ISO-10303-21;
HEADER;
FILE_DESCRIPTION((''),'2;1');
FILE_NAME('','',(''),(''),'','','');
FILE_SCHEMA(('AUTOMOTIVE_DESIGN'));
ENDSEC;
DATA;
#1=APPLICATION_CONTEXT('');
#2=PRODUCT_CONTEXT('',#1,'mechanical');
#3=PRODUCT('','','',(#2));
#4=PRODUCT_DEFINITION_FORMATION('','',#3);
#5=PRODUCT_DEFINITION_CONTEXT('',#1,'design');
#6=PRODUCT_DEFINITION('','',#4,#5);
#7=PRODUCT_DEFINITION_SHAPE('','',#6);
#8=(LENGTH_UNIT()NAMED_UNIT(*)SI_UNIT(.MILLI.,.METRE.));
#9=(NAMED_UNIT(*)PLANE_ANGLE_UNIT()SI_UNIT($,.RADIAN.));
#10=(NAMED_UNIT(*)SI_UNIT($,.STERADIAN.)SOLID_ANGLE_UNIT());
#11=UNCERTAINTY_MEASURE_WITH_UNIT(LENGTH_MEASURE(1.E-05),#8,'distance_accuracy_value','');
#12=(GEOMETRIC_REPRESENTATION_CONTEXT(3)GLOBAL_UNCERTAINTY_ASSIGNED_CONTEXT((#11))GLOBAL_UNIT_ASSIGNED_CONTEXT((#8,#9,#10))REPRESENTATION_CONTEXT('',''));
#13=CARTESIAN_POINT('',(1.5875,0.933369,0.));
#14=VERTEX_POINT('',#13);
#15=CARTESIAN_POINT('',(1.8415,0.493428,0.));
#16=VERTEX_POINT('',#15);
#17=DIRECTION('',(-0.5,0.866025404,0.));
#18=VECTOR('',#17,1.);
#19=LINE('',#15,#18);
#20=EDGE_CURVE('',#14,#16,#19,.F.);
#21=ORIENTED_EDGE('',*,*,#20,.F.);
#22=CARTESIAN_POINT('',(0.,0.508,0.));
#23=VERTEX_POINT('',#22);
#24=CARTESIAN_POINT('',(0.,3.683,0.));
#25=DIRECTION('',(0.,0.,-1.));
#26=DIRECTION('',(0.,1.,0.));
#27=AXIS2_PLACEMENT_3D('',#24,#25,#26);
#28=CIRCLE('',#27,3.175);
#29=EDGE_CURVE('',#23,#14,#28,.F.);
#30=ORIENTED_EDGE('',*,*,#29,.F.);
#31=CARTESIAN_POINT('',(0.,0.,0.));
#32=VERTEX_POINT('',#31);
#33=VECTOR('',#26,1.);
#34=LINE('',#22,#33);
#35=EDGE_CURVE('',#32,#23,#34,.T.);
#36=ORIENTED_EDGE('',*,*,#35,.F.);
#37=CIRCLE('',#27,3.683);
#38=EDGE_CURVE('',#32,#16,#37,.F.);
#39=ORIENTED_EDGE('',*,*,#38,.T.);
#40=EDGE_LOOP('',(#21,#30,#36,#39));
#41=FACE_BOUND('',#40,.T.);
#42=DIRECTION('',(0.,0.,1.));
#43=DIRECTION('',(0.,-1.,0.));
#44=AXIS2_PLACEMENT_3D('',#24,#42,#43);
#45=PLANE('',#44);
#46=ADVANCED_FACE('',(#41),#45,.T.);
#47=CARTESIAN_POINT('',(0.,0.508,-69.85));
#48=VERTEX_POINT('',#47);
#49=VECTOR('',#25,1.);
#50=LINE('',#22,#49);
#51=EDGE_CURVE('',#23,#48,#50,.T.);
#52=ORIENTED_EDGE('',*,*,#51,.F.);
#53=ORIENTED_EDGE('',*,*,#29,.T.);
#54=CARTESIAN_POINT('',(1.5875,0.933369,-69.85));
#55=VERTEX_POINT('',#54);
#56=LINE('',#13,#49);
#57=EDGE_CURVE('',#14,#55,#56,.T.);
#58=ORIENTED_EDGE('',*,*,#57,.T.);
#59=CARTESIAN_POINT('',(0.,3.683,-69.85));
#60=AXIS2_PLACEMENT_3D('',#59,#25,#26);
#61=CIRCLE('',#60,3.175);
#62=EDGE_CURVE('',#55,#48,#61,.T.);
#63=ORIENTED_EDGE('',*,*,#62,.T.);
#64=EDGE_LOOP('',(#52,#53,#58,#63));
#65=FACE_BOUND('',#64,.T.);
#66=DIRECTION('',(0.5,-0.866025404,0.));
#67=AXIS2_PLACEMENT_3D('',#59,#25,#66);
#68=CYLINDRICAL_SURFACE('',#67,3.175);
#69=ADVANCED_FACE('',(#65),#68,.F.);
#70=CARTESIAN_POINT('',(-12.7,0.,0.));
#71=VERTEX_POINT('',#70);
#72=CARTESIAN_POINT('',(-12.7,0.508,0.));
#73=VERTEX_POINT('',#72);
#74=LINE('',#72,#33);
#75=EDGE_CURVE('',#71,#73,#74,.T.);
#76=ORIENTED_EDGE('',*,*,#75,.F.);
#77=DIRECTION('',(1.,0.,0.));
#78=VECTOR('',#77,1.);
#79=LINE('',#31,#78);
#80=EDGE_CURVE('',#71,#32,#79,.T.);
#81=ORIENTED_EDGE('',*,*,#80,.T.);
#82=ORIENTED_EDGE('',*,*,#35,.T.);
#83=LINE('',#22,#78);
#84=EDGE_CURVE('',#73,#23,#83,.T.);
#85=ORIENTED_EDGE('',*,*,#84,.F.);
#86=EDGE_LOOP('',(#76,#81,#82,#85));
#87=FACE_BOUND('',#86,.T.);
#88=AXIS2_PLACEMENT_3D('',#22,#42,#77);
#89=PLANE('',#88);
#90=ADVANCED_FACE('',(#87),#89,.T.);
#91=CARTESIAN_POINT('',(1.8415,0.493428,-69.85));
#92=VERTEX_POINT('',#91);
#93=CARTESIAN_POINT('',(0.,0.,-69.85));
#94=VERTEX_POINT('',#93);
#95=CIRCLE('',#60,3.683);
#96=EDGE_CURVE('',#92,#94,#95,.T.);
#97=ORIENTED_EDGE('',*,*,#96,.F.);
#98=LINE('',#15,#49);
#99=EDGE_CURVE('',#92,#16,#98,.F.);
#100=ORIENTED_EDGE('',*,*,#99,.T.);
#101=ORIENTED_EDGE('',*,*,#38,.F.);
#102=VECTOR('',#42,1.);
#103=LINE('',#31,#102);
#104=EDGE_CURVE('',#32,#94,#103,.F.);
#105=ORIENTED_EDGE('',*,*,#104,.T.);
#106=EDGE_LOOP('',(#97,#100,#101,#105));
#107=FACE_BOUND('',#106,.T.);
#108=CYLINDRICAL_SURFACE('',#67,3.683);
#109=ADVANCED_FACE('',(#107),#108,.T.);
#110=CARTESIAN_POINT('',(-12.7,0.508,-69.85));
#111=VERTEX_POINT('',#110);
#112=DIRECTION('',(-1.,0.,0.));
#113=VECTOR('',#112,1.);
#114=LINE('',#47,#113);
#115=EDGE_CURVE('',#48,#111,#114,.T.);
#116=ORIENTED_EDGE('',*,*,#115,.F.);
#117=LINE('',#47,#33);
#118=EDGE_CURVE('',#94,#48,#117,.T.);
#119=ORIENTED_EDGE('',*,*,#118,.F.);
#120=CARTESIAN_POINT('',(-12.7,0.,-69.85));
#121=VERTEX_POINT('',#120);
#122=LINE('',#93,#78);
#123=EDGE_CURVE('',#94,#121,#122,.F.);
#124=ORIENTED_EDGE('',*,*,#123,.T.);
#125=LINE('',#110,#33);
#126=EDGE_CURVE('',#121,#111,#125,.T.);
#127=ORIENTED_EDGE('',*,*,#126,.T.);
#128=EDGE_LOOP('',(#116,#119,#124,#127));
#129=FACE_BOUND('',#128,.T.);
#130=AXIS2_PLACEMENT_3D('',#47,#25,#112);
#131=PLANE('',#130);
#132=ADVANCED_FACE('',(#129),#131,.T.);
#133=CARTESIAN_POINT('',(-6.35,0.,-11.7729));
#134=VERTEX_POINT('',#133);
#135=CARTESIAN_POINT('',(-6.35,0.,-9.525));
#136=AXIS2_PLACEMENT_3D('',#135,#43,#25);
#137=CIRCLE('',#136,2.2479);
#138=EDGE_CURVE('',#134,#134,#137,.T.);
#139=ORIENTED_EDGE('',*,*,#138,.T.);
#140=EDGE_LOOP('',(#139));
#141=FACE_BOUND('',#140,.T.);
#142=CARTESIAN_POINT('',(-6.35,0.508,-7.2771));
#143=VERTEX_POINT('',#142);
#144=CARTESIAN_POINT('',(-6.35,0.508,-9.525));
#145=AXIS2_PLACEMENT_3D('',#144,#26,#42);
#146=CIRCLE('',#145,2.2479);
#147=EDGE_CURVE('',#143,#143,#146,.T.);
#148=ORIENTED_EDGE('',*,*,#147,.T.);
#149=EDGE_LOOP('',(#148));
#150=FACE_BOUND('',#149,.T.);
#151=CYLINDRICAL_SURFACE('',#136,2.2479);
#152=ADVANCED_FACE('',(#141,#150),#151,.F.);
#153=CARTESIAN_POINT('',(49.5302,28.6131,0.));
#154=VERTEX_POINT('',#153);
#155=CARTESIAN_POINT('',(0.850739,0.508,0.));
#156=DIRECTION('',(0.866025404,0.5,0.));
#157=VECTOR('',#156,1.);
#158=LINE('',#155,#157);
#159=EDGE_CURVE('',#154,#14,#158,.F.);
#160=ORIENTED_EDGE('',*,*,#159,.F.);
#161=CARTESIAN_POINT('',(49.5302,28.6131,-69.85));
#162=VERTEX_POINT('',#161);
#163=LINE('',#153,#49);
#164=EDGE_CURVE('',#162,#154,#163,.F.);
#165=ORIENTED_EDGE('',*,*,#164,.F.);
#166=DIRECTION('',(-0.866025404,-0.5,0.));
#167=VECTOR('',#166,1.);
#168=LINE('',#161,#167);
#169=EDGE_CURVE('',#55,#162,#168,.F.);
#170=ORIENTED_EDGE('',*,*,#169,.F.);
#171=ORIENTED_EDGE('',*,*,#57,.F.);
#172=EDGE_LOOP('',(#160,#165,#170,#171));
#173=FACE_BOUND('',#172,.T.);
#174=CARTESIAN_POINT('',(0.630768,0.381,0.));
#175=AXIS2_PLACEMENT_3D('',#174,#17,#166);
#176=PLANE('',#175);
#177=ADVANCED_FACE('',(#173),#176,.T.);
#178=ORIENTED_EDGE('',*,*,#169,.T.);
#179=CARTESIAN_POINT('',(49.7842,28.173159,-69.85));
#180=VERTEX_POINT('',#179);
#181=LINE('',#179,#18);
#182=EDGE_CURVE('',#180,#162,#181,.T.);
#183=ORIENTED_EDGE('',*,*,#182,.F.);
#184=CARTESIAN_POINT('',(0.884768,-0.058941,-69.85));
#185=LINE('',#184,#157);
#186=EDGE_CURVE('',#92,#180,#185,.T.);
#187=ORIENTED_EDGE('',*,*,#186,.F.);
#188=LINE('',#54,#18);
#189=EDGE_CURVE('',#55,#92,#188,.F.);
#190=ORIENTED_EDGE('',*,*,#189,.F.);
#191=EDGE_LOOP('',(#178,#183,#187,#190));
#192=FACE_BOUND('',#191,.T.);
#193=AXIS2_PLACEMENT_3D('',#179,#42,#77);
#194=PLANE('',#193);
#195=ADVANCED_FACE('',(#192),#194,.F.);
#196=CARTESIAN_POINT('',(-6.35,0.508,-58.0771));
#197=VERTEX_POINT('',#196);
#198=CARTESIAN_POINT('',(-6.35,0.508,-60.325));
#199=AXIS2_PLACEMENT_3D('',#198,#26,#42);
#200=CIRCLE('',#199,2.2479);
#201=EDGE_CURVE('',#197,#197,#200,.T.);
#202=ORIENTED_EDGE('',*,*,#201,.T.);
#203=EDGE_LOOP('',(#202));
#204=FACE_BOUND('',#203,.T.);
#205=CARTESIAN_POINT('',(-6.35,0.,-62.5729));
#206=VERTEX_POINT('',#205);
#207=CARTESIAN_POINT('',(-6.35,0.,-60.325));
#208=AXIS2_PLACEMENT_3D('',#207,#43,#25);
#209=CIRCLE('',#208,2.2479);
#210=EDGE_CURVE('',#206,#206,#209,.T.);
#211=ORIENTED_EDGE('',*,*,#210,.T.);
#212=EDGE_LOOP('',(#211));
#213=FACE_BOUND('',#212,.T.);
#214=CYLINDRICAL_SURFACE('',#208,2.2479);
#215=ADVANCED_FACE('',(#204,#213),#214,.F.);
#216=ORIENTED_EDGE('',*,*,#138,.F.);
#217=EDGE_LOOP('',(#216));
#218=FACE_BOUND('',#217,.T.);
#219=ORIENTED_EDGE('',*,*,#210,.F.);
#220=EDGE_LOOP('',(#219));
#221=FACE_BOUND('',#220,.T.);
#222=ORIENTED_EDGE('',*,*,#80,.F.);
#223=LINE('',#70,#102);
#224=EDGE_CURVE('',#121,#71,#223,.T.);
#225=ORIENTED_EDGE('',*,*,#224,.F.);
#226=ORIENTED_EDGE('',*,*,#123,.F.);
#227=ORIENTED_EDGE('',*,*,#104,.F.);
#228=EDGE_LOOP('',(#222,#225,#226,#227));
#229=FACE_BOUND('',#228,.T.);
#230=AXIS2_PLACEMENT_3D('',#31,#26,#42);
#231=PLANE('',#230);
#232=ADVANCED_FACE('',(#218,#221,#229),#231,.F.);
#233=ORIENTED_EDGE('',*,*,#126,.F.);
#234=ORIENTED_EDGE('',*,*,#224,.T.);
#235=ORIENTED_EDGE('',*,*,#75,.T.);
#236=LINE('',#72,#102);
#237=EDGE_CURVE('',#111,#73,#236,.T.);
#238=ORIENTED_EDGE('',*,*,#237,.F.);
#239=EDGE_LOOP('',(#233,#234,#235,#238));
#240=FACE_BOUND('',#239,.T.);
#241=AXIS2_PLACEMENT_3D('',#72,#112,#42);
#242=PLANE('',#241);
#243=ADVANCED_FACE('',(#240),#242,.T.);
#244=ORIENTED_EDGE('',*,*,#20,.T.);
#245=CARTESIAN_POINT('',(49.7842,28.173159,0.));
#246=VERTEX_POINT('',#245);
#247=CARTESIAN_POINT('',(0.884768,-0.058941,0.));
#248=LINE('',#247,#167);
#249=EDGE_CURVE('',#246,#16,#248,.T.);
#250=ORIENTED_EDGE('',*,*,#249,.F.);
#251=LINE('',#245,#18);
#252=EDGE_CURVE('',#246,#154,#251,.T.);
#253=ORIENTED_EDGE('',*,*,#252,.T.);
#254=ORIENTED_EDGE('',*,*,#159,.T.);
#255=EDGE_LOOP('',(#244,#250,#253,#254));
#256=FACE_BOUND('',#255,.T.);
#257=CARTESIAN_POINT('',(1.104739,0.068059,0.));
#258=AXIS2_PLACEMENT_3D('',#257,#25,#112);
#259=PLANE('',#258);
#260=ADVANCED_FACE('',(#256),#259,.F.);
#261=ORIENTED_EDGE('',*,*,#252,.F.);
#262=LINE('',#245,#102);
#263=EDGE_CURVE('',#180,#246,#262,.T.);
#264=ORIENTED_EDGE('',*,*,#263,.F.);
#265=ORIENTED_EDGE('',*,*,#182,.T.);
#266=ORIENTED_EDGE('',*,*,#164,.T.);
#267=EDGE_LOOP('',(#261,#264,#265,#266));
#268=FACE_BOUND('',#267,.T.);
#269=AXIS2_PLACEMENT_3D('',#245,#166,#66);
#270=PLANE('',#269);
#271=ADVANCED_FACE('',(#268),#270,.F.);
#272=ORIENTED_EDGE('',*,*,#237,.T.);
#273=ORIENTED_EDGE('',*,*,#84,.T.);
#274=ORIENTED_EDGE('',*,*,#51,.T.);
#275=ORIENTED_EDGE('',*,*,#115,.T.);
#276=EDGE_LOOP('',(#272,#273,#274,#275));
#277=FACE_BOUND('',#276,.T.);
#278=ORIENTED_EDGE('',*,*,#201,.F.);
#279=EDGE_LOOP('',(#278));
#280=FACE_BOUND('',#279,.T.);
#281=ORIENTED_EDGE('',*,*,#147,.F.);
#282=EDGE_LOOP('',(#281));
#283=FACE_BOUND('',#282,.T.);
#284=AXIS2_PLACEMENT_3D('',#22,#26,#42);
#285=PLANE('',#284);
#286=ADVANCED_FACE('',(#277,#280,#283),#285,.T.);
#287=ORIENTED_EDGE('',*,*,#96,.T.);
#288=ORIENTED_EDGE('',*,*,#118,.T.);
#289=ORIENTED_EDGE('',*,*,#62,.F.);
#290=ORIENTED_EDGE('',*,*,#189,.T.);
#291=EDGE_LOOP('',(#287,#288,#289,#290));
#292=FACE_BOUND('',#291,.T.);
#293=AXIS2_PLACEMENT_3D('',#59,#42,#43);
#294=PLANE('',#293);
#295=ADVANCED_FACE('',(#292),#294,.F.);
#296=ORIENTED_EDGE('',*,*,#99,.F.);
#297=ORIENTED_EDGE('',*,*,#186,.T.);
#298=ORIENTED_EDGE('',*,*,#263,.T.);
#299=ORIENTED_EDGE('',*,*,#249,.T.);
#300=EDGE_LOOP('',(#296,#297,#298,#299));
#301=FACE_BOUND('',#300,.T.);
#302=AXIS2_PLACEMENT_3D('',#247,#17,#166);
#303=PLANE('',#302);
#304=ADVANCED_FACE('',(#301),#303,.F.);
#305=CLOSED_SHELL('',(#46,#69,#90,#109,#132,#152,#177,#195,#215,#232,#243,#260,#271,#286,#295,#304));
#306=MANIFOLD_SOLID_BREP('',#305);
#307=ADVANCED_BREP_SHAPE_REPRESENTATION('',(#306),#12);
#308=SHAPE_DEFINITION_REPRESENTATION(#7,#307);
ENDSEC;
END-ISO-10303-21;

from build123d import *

# Parameters (mm, degrees)
SKETCH2_W             = 12.7
SKETCH2_H             = 69.85
BOSS_EXTRUDE2_DEPTH   = 0.508
EDGE_FLANGE2_DEPTH    = 69.85
F_8_CLEARANCE_HOLE1_D = 4.4958


# Sheet-metal steps are written as plain solids
with BuildPart() as part:
    # Sketch2 → Boss-Extrude2 (new body)
    with BuildSketch(Plane(origin=(0, 0, 0), x_dir=(1, 0, 0), z_dir=(0, 1, 0))):
        with Locations((-6.35, 34.925)):
            Rectangle(SKETCH2_W, SKETCH2_H)
    extrude(amount=BOSS_EXTRUDE2_DEPTH)

    # Edge-Flange2 section (across the edge) → Edge-Flange2 (add)
    with BuildSketch(Plane(origin=(0.850738686, 0.508, 0), x_dir=(-0.49999999999999495, 0.8660254037844416, 0), z_dir=(0, 0, -1))):
        with BuildLine():
            Line((-0.508, 0.850738686), (-0.508, 56.2102))
            Line((-0.508, 56.2102), (0, 56.2102))
            Line((0, 56.2102), (0, 0.850738686))
            ThreePointArc((0, 0.850738686), (0.108185502, 0.028988218), (0.425369343, -0.736761314))
            Line((0.425369343, -0.736761314), (-0.014571562, -0.990761314))
            ThreePointArc((-0.014571562, -0.990761314), (-0.382504818, -0.102491857), (-0.508, 0.850738686))
        make_face()
    extrude(amount=EDGE_FLANGE2_DEPTH)

    # #8 Clearance Hole1 (through all)
    with Locations(Plane(origin=(0, 0, 0), x_dir=(-1, 0, 0), z_dir=(0, -1, 0))):
        with Locations((6.35, 60.325), (6.35, 9.525)):
            Hole(F_8_CLEARANCE_HOLE1_D / 2)


solid = part.part
